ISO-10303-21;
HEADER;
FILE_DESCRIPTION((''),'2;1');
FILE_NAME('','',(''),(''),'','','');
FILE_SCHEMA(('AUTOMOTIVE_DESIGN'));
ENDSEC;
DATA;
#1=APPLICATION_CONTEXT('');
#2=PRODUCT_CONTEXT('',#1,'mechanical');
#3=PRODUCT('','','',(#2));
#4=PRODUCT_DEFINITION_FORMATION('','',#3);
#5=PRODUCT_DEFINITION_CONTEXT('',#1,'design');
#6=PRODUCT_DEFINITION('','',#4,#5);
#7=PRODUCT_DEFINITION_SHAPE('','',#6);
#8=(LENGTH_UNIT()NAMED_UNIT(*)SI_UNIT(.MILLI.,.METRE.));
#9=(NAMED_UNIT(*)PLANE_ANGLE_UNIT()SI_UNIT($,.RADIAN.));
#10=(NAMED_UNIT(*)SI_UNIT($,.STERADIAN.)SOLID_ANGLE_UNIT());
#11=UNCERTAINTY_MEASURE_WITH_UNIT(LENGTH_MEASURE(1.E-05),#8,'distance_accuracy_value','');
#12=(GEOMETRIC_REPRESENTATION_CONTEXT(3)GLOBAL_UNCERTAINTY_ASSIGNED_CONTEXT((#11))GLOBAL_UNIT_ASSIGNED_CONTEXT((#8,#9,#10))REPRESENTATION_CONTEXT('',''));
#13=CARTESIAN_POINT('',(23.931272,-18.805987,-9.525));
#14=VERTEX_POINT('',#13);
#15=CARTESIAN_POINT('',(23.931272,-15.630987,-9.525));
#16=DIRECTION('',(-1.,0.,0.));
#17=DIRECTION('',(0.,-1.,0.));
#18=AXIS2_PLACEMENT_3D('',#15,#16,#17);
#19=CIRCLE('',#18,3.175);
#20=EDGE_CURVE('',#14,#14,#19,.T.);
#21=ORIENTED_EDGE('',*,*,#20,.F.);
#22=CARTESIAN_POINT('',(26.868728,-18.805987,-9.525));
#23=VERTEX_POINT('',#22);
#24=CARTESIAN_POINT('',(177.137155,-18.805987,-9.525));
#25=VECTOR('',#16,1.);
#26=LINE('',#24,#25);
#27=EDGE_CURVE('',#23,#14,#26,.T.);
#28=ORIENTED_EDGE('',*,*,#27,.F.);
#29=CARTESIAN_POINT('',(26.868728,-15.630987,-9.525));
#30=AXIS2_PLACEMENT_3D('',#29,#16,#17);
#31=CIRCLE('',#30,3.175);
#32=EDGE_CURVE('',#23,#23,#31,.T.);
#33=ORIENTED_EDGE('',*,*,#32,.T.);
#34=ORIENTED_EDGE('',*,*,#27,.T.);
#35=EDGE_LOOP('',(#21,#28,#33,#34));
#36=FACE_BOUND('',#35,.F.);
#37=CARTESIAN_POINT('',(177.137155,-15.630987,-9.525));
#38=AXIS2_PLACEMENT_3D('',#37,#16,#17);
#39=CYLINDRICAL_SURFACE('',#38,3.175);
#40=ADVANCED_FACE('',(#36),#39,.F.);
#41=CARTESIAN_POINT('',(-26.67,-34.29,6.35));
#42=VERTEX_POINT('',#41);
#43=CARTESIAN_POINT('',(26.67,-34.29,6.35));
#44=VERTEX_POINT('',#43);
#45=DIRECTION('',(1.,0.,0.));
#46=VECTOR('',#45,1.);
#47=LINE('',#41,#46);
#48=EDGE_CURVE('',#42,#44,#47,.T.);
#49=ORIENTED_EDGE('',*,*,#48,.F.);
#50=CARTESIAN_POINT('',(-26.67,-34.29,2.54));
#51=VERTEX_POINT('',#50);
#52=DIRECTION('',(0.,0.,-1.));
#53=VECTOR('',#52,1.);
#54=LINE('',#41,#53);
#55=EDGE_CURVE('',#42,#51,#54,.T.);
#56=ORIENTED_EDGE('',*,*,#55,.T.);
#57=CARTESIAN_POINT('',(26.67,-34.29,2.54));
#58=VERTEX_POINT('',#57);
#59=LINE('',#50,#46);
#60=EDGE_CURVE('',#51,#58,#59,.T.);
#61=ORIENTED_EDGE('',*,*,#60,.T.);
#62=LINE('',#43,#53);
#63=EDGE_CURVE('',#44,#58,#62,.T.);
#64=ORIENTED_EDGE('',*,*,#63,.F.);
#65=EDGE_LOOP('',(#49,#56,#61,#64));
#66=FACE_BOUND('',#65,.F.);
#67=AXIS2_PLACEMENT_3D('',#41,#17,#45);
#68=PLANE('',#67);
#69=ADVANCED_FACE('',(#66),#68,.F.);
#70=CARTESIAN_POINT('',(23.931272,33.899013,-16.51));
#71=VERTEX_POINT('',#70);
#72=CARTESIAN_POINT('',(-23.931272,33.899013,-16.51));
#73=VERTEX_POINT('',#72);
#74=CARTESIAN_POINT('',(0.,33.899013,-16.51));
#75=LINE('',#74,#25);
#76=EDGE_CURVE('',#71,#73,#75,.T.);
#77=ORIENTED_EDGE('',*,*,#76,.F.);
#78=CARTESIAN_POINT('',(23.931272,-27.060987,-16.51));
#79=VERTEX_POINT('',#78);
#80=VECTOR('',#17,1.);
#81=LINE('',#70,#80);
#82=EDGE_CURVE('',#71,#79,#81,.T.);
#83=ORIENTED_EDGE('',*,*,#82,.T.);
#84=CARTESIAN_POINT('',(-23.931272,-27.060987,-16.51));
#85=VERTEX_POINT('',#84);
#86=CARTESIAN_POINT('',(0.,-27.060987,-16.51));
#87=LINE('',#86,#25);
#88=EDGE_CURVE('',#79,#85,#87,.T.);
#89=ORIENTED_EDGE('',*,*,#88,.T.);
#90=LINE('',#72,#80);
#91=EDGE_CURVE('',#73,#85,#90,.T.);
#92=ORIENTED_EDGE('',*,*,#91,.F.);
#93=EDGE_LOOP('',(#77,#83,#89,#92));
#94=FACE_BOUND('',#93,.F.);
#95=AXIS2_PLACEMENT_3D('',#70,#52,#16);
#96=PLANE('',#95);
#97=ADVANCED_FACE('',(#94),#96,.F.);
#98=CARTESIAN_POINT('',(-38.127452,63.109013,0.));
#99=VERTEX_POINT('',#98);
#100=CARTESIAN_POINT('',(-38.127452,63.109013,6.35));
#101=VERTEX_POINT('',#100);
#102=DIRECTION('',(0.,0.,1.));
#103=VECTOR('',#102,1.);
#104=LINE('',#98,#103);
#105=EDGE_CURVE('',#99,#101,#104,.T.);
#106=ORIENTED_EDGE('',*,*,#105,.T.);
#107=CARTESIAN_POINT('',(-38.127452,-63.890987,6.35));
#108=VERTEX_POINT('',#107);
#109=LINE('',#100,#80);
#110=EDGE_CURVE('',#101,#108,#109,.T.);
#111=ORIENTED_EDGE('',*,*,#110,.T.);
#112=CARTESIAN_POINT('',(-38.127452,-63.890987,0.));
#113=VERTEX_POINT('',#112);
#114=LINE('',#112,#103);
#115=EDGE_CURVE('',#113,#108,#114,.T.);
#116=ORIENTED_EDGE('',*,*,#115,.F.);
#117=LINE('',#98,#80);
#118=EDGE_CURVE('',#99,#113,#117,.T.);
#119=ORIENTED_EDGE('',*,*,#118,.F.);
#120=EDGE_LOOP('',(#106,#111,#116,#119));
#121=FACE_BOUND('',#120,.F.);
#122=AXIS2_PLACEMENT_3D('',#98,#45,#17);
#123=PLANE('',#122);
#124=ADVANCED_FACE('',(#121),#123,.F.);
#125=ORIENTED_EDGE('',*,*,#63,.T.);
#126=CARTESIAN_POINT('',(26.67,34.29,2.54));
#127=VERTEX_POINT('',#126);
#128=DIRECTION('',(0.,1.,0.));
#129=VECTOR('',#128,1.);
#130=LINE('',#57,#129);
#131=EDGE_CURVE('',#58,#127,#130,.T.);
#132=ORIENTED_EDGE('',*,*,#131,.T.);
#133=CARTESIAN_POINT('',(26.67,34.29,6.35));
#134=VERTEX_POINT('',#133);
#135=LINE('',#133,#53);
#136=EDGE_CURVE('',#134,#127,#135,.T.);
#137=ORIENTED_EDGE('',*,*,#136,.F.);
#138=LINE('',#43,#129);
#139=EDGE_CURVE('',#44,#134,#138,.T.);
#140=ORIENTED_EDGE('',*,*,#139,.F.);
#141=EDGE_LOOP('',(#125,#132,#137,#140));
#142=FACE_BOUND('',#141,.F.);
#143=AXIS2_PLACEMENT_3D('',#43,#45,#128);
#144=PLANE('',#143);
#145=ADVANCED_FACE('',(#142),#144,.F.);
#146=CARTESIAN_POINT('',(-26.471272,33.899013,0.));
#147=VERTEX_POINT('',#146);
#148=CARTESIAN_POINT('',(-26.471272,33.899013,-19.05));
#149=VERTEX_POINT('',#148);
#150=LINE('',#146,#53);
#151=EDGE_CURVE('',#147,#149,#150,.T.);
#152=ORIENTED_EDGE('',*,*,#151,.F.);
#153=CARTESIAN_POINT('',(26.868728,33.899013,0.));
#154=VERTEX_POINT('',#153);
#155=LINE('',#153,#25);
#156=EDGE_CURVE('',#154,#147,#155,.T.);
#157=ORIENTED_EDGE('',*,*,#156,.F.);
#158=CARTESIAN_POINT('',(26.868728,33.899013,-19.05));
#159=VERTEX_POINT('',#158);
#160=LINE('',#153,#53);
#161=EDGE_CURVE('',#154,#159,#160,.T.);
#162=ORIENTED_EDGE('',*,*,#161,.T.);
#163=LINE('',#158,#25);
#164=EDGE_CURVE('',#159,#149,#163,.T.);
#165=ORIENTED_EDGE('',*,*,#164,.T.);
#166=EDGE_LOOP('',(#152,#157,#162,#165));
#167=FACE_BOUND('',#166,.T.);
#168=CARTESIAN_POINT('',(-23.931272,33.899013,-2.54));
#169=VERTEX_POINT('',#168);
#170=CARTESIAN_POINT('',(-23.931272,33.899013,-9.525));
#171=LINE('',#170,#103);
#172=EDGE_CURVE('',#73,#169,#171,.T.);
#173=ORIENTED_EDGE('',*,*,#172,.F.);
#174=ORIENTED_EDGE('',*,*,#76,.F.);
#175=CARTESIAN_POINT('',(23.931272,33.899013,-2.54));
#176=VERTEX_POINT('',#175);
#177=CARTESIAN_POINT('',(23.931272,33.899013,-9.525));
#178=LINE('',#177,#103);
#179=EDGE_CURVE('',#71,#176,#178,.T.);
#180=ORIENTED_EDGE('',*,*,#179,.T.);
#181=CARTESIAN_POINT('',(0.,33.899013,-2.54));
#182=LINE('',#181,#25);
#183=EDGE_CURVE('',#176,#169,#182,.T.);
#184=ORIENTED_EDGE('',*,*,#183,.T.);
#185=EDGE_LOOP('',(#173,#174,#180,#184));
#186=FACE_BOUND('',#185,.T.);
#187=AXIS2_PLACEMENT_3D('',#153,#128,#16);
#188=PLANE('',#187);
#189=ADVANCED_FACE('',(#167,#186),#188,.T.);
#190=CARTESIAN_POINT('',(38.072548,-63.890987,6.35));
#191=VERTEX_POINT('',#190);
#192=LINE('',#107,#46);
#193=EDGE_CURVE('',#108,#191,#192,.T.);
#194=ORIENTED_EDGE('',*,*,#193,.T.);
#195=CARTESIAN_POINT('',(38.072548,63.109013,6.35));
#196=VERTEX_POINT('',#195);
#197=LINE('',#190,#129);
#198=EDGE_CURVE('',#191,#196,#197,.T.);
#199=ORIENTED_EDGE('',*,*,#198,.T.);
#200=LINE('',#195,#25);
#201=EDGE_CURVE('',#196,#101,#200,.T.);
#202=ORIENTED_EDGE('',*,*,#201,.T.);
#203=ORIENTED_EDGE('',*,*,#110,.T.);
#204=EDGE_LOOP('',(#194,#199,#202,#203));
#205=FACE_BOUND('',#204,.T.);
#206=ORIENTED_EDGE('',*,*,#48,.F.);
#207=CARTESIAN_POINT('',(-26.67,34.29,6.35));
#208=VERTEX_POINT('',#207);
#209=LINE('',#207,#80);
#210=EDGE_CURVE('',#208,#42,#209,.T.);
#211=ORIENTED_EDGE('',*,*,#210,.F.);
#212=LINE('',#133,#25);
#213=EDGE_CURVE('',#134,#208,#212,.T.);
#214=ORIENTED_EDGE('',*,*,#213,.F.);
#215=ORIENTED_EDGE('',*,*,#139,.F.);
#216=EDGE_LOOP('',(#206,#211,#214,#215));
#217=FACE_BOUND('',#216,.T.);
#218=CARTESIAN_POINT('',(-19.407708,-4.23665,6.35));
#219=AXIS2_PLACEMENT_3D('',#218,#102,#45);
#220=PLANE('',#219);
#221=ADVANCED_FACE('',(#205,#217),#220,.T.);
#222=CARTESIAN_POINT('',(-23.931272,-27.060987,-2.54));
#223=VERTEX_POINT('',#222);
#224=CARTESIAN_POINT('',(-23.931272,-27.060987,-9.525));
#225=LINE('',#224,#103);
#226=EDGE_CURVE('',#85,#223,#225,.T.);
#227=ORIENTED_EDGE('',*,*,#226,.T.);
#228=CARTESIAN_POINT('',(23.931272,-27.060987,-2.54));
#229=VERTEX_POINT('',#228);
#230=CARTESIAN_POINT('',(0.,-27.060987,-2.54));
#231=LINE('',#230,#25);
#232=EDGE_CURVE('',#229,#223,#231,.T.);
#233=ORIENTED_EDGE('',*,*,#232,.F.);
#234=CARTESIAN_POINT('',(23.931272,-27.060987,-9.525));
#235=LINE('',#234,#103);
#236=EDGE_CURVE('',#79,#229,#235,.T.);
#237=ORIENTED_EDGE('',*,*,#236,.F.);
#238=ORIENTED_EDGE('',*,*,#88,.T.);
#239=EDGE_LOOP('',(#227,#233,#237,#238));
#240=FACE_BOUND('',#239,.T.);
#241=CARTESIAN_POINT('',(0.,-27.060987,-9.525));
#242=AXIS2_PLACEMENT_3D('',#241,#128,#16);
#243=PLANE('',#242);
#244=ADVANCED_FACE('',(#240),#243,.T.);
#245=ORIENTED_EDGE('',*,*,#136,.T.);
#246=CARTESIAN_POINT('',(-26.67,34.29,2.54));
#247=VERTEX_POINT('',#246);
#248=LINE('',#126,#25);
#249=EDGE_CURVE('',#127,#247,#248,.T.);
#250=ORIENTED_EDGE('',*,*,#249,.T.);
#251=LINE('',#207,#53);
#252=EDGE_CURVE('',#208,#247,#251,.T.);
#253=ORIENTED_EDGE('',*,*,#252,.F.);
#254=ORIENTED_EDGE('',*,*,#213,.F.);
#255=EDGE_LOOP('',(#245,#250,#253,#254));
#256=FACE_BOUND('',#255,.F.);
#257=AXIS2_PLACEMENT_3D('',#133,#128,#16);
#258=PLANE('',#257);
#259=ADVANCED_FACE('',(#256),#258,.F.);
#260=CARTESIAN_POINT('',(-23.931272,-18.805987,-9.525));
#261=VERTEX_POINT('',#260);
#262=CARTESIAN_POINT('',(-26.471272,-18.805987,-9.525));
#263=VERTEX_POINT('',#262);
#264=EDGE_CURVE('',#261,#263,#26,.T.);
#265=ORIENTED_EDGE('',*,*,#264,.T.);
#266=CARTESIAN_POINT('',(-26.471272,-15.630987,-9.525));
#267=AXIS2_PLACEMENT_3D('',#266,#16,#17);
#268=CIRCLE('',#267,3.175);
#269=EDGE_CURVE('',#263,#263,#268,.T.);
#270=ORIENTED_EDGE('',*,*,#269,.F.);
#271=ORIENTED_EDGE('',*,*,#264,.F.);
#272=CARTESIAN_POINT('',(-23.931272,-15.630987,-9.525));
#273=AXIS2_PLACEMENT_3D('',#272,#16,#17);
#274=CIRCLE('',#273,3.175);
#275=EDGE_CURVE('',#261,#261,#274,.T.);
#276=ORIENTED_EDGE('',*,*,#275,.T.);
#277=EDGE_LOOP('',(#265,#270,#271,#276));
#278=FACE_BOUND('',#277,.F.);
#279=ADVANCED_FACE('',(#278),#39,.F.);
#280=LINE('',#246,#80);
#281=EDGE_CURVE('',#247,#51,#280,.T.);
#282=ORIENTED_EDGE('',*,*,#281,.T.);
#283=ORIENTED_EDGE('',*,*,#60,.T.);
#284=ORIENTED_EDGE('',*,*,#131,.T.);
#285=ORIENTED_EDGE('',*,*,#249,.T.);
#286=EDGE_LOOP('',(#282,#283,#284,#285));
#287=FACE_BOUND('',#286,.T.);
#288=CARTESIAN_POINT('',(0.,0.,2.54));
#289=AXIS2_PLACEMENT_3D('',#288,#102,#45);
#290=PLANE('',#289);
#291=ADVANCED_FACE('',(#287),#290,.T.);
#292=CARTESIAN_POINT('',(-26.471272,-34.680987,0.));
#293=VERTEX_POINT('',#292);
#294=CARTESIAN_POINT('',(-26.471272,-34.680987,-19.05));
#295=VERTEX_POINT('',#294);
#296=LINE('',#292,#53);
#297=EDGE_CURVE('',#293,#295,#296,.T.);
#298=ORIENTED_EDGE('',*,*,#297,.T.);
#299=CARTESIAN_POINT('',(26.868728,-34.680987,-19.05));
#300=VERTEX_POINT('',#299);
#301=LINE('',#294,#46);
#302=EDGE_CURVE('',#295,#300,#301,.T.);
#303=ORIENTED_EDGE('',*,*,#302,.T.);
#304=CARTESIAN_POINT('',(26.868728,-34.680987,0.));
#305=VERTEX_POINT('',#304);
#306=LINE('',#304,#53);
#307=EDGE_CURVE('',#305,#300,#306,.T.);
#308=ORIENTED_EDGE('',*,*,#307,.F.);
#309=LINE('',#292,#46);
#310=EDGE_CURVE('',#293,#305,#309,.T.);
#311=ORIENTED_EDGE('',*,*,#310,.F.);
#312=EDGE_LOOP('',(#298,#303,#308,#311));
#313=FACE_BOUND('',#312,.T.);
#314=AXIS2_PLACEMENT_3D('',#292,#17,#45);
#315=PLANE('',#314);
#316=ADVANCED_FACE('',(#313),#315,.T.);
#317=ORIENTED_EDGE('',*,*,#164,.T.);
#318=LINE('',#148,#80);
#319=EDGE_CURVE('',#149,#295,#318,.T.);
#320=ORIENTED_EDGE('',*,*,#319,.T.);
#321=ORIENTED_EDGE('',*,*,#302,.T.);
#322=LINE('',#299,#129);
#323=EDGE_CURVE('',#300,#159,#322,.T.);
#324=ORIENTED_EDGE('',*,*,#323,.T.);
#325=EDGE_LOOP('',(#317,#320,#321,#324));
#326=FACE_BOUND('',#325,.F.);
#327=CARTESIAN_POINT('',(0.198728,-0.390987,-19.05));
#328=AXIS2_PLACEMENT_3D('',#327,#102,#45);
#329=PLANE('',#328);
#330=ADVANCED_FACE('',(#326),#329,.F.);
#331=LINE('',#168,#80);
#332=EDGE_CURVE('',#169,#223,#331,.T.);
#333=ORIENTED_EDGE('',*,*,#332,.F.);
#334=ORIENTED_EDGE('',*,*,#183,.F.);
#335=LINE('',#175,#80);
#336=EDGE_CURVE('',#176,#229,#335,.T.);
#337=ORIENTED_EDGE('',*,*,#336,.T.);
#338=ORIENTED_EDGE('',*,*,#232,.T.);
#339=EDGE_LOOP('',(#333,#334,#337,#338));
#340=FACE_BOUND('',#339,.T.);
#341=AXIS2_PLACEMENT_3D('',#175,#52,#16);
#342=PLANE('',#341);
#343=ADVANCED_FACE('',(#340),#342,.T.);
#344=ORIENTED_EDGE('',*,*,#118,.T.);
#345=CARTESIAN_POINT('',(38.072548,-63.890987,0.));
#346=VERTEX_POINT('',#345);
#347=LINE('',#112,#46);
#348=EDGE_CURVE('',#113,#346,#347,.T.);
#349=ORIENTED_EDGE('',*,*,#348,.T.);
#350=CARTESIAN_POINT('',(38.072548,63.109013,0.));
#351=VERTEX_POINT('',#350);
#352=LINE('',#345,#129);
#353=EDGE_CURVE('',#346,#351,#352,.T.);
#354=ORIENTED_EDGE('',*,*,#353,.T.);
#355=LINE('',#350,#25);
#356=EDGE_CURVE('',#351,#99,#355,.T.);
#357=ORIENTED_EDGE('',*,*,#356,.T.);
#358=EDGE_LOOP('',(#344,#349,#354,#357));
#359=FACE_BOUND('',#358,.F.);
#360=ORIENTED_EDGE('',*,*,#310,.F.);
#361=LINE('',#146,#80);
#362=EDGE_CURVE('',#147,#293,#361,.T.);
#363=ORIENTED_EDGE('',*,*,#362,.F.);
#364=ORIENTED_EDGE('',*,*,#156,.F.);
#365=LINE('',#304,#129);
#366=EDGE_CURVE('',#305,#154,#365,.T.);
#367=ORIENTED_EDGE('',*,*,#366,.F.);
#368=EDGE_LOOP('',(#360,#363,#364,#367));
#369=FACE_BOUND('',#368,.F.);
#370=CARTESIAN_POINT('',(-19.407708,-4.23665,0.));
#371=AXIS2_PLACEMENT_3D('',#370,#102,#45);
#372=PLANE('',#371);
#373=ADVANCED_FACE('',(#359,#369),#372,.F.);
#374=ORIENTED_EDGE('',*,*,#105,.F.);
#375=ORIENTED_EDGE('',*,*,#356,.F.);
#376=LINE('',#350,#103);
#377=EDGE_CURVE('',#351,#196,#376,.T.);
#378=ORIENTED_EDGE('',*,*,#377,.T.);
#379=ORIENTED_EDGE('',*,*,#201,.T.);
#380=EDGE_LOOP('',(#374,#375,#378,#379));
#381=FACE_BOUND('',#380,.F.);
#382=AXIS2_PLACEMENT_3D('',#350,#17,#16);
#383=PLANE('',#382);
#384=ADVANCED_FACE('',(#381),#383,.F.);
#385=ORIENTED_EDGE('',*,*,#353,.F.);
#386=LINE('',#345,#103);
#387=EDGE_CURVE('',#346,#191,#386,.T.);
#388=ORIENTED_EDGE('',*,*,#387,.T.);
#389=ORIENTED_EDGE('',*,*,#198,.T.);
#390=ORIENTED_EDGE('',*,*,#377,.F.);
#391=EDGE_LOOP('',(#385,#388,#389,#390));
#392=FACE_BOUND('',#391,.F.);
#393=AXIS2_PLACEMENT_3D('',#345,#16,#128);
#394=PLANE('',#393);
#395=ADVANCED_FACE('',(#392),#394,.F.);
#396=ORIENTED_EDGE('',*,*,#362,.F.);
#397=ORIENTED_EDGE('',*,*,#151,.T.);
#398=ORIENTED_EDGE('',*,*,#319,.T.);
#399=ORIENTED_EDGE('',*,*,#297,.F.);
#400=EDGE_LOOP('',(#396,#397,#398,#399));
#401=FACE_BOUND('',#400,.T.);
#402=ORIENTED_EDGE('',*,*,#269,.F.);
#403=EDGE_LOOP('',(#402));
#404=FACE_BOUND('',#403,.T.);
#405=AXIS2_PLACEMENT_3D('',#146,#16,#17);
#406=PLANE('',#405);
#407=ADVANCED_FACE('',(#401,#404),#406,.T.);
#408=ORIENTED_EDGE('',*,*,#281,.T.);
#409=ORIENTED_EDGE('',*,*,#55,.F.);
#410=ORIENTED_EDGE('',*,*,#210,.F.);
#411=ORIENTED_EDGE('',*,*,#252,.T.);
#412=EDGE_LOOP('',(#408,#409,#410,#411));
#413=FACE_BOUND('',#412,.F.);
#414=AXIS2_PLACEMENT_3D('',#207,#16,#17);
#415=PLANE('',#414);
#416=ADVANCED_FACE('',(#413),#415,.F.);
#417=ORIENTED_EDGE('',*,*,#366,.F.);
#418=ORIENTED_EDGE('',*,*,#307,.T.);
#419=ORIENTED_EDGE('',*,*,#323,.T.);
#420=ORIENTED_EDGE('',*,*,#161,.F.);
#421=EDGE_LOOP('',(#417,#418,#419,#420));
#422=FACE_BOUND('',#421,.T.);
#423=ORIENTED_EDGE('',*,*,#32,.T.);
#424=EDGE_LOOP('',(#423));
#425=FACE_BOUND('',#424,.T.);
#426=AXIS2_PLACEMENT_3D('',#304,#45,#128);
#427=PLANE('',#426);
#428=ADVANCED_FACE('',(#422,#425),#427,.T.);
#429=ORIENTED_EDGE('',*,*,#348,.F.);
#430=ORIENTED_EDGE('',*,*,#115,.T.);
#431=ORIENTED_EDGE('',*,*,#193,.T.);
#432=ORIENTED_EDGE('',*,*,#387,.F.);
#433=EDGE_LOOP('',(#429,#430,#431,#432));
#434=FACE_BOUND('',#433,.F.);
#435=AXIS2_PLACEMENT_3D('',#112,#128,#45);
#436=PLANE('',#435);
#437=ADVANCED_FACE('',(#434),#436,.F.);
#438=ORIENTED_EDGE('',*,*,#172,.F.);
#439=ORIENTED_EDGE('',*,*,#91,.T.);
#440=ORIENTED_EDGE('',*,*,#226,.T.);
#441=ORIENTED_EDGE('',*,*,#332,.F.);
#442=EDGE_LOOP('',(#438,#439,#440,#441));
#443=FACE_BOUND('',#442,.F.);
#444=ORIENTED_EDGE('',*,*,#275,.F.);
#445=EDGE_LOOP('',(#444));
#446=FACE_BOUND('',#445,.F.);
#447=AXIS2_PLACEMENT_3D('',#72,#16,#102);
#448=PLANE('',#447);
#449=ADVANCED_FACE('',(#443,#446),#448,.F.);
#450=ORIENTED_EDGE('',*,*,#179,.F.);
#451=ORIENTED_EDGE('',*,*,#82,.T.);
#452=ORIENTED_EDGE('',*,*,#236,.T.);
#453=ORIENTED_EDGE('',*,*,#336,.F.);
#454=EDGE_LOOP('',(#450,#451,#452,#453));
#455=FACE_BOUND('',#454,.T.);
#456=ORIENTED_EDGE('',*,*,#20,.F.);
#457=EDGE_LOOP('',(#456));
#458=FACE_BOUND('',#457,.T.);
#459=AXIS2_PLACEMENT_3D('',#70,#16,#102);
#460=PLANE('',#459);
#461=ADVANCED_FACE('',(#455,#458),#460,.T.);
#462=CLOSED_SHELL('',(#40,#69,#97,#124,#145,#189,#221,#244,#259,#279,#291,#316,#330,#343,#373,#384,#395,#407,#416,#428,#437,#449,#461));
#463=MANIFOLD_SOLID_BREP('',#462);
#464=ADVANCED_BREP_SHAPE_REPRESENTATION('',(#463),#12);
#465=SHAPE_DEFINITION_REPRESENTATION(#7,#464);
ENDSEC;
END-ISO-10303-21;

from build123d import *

# Parameters (mm, degrees)
F1_DEPTH = 19.05
F2_W     = 47.8625434434
F2_H     = 13.97
F3_DEPTH = 60.96
F4_DEPTH = 6.35
F6_D     = 6.35
F8_DEPTH = 3.81


# Not quite as in the source:
# - a feature names something its author has since deleted; it is built from what else it names


with BuildPart() as f1:
    # F0 (on Top) → F1 (new body)
    with BuildSketch(Plane.XY):
        Polygon((-0.0274520135, 33.8990125982), (-26.4712717217, 33.8990125982), (-26.4712717217, -0.3909874018), (-26.4712717217, -34.6809874018), (16.3237974048, -34.6809874018), (26.8687282783, -34.6809874018), (26.8687282783, -0.3909874018), (26.8687282783, 33.8990125982), align=None)
    extrude(amount=-F1_DEPTH)

    # F2 (on face) → F3 (cut)
    with BuildSketch(Plane(origin=(0, 33.8990125982, 0), x_dir=(-1, 0, 0), z_dir=(0, 1, 0))):
        with Locations((0, -9.525)):
            Rectangle(F2_W, F2_H)
    extrude(amount=-F3_DEPTH, mode=Mode.SUBTRACT)

    # F0 (on Top) → F4 (join)
    with BuildSketch(Plane.XY):
        Polygon((-26.4712717217, -0.3909874018), (-26.4712717217, 33.8990125982), (-0.0274520135, 33.8990125982), (-0.0274520135, 37.7090125982), (-0.0274520135, 63.1090125982), (-38.1274520135, 63.1090125982), (-38.1274520135, -63.8909874018), (16.3237974048, -63.8909874018), (16.3237974048, -34.6809874018), (-26.4712717217, -34.6809874018), align=None)
        Polygon((-0.0274520135, 33.8990125982), (-26.4712717217, 33.8990125982), (-26.4712717217, -0.3909874018), (-26.4712717217, -34.6809874018), (16.3237974048, -34.6809874018), (26.8687282783, -34.6809874018), (26.8687282783, -0.3909874018), (26.8687282783, 33.8990125982), align=None)
        Polygon((-0.0274520135, 37.7090125982), (-0.0274520135, 33.8990125982), (26.8687282783, 33.8990125982), (26.8687282783, -0.3909874018), (38.0725479865, -0.3909874018), (38.0725479865, 63.1090125982), (-0.0274520135, 63.1090125982), align=None)
        Polygon((38.0725479865, -0.3909874018), (26.8687282783, -0.3909874018), (26.8687282783, -34.6809874018), (16.3237974048, -34.6809874018), (16.3237974048, -63.8909874018), (38.0725479865, -63.8909874018), align=None)
    extrude(amount=F4_DEPTH)

    # F6 (through all)
    with Locations(Plane.YZ.offset(26.8687282783)):
        with Locations((-15.6309874018, -9.525)):
            Hole(F6_D / 2)

    # F7 (on face) → F8 (cut)
    with BuildSketch(Plane.XY.offset(6.35)):
        Polygon((26.67, -34.29), (26.67, 0), (26.67, 34.29), (-26.67, 34.29), (-26.67, 0), (-26.67, -34.29), align=None)
    extrude(amount=-F8_DEPTH, mode=Mode.SUBTRACT)


solid = f1.part
